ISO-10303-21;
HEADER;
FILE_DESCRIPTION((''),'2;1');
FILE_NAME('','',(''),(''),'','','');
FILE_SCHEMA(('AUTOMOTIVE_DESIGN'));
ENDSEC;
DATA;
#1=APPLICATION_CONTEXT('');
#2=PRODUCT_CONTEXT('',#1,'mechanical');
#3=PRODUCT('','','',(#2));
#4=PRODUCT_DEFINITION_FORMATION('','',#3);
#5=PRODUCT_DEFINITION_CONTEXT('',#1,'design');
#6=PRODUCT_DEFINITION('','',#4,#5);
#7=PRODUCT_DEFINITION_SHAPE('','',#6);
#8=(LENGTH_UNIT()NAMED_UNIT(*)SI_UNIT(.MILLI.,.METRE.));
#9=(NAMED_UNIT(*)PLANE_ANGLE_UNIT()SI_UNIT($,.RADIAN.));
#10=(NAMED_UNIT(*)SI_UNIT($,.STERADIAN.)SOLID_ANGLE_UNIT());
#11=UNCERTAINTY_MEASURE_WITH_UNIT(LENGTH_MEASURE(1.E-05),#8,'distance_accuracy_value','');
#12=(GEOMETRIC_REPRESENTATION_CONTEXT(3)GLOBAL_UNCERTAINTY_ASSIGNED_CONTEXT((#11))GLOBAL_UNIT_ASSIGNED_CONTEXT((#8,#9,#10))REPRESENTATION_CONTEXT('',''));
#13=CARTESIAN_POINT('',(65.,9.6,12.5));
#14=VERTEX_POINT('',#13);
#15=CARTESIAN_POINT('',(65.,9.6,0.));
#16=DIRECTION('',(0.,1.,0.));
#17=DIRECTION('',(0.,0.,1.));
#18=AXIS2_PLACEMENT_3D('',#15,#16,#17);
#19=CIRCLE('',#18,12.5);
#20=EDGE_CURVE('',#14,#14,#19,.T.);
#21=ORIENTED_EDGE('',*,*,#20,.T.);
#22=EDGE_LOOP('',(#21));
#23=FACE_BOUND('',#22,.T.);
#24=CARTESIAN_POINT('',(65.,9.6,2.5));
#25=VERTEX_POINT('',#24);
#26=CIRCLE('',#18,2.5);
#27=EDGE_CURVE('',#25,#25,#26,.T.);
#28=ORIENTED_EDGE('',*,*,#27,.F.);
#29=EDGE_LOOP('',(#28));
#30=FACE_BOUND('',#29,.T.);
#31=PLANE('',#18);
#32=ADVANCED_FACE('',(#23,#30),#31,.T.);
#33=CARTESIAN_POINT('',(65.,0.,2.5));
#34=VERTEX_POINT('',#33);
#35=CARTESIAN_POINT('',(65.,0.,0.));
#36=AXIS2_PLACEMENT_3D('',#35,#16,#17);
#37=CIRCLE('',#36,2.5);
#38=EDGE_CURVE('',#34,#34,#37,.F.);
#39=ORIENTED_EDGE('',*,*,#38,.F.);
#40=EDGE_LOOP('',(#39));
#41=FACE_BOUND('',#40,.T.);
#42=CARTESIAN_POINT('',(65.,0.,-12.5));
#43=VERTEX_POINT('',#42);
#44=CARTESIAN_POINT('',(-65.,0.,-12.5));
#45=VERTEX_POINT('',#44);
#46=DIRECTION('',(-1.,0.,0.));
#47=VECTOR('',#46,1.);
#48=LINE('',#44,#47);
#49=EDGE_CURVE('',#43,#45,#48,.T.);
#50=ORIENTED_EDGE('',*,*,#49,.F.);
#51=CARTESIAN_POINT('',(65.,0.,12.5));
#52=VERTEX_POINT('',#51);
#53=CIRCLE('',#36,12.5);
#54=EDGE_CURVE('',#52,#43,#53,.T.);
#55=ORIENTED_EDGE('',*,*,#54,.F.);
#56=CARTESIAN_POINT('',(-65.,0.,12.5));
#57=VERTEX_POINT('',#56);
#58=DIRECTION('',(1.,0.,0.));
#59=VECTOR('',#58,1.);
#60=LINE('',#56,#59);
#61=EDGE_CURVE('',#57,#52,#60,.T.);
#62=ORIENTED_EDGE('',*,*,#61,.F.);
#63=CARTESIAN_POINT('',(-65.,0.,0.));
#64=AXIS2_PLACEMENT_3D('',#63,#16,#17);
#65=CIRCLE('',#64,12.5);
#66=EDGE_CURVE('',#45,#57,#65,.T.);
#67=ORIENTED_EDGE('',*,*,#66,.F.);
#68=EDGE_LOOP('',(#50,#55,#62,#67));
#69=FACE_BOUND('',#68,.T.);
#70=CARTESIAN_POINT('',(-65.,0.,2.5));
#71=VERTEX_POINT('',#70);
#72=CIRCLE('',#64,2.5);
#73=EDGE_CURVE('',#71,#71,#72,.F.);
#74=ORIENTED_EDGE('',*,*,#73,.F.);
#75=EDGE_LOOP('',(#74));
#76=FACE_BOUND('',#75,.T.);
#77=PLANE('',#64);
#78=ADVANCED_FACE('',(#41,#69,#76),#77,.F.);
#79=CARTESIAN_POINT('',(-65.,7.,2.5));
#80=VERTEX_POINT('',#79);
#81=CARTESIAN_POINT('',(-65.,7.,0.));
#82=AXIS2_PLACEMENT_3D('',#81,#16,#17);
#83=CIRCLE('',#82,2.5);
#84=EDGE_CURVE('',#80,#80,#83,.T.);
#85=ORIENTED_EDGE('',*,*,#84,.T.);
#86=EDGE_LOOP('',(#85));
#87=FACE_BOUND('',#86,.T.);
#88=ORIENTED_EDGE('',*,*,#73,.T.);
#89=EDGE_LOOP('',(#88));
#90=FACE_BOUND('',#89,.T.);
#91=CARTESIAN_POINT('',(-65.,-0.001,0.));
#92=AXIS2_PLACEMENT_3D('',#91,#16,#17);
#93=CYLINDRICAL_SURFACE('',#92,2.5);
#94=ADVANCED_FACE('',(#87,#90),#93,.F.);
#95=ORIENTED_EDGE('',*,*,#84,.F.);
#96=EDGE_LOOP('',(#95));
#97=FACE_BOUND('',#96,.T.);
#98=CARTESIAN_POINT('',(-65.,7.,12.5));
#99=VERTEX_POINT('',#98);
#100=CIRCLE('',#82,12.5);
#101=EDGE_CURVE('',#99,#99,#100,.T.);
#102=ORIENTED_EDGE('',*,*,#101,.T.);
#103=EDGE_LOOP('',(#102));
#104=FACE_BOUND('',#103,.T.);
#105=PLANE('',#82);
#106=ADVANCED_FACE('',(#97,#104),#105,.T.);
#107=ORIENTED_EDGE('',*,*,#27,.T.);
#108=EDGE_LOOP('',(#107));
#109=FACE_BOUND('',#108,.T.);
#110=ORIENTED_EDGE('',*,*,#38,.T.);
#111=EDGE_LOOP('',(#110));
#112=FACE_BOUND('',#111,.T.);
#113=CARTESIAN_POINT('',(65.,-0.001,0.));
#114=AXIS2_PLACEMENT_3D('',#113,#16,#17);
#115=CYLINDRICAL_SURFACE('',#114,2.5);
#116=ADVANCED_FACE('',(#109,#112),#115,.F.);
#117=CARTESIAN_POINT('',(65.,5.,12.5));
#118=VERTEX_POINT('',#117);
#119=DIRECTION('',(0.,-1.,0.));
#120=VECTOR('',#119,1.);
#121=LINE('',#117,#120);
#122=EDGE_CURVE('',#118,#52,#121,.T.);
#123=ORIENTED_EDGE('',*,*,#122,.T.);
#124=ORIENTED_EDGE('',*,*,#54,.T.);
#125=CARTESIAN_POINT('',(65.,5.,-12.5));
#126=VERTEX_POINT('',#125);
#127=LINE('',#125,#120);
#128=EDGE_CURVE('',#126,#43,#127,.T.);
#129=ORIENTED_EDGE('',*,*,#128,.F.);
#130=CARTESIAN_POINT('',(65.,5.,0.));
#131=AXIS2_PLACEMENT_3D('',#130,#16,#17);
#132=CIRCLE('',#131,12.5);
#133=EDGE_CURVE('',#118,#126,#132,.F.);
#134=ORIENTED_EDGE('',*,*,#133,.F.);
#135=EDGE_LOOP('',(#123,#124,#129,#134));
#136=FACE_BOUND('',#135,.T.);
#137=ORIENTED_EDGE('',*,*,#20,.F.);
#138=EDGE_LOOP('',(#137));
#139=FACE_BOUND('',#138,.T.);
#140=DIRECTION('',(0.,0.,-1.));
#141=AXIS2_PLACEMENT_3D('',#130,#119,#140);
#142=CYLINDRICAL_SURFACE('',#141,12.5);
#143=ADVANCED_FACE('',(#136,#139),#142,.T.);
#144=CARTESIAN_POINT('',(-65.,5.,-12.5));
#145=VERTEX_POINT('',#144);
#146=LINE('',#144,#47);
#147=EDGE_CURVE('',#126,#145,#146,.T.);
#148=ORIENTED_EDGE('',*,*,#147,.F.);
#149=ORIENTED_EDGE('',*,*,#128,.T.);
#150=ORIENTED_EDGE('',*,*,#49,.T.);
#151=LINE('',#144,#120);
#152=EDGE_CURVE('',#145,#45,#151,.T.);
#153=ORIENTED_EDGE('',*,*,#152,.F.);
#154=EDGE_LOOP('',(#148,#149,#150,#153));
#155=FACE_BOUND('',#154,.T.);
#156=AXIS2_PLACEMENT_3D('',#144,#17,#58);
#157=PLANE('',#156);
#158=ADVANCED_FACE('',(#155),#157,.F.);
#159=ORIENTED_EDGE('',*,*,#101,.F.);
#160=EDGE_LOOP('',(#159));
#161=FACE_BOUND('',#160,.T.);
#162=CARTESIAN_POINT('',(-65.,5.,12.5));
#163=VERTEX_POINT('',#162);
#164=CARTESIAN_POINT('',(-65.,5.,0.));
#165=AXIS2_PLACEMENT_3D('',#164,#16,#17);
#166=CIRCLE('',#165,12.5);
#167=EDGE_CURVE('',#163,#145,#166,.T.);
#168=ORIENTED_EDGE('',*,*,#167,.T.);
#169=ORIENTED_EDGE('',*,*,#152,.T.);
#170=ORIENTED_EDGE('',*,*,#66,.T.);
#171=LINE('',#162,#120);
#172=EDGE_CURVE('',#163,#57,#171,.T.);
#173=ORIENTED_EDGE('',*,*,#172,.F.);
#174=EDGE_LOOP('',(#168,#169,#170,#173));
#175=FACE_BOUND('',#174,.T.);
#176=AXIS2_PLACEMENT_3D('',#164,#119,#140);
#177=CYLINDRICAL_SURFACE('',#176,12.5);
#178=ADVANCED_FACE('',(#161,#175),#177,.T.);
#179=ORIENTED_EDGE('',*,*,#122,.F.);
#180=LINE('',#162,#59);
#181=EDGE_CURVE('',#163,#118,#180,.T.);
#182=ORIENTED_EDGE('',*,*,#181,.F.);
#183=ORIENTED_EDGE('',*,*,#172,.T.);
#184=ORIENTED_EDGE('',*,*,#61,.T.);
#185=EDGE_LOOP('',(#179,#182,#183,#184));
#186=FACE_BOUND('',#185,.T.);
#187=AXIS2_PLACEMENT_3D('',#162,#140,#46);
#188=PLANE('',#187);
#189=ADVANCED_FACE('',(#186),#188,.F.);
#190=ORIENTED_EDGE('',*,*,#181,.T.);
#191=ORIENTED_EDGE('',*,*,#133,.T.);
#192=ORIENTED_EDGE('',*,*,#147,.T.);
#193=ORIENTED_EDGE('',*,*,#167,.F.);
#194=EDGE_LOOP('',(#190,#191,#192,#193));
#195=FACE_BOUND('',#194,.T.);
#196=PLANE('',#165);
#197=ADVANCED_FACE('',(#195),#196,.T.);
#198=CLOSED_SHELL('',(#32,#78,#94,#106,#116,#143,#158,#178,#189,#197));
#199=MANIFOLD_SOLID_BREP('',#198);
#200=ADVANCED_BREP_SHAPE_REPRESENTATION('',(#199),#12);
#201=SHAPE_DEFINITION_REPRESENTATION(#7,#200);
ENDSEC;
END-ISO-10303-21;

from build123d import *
from build123d.topology import SkipClean

# Parameters (mm, degrees)
EXTRUDE_1_DEPTH     = 5
SKETCH_5_R          = 12.5
EXTRUDE_2_DEPTH     = 2
CUT_EXTRUDE_1_REACH = 80.813
SKETCH_6_R          = 2.5
SKETCH_8_R          = 12.5
EXTRUDE_3_DEPTH     = 4.6
CUT_EXTRUDE_2_REACH = 81.086
SKETCH_7_R          = 2.5


with BuildPart() as part:
    # 草图1 → 凸台-拉伸1 (new body)
    with BuildSketch(Plane(origin=(0, 0, 0), x_dir=(1, 0, 0), z_dir=(0, 1, 0))):
        with BuildLine():
            Line((-65, 12.5), (65, 12.5))
            ThreePointArc((65, 12.5), (77.5, 0), (65, -12.5))
            Line((65, -12.5), (-65, -12.5))
            ThreePointArc((-65, -12.5), (-77.5, 0), (-65, 12.5))
        make_face()
    extrude(amount=EXTRUDE_1_DEPTH)

    # 草图5 → 凸台-拉伸2 (add)
    with BuildSketch(Plane(origin=(0, 5, 0), x_dir=(1, 0, 0), z_dir=(0, 1, 0))):
        with Locations((-65, 0)):
            Circle(SKETCH_5_R)
    extrude(amount=EXTRUDE_2_DEPTH)

    # 草图6 → 切除-拉伸1 (cut, up to next)
    with BuildSketch(Plane(origin=(0, 7, 0), x_dir=(1, 0, 0), z_dir=(0, 1, 0)), mode=Mode.PRIVATE) as cut_extrude_1_sk1:
        with Locations((-65, 0)):
            Circle(SKETCH_6_R)
    cut_extrude_1_tool1 = extrude(cut_extrude_1_sk1.sketch, amount=-CUT_EXTRUDE_1_REACH, mode=Mode.PRIVATE) & part.part
    add(cut_extrude_1_tool1.solids().sort_by_distance((-65, 7, 0))[0], mode=Mode.SUBTRACT)

    # 草图8 → 凸台-拉伸3 (add)
    with SkipClean():  # the faces are left unmerged after this step: merging them gives an invalid solid
        with BuildSketch(Plane(origin=(0, 5, 0), x_dir=(1, 0, 0), z_dir=(0, 1, 0))):
            with Locations((65, 0)):
                Circle(SKETCH_8_R)
        extrude(amount=EXTRUDE_3_DEPTH)
    add(part.part.scale(1), mode=Mode.REPLACE)  # the faces are merged on a copy

    # 草图7 → 切除-拉伸2 (cut, up to next)
    with BuildSketch(Plane(origin=(0, 9.6, 0), x_dir=(1, 0, 0), z_dir=(0, 1, 0)), mode=Mode.PRIVATE) as cut_extrude_2_sk1:
        with Locations((65, 0)):
            Circle(SKETCH_7_R)
    cut_extrude_2_tool1 = extrude(cut_extrude_2_sk1.sketch, amount=-CUT_EXTRUDE_2_REACH, mode=Mode.PRIVATE) & part.part
    add(cut_extrude_2_tool1.solids().sort_by_distance((65, 9.6, 0))[0], mode=Mode.SUBTRACT)


solid = part.part
